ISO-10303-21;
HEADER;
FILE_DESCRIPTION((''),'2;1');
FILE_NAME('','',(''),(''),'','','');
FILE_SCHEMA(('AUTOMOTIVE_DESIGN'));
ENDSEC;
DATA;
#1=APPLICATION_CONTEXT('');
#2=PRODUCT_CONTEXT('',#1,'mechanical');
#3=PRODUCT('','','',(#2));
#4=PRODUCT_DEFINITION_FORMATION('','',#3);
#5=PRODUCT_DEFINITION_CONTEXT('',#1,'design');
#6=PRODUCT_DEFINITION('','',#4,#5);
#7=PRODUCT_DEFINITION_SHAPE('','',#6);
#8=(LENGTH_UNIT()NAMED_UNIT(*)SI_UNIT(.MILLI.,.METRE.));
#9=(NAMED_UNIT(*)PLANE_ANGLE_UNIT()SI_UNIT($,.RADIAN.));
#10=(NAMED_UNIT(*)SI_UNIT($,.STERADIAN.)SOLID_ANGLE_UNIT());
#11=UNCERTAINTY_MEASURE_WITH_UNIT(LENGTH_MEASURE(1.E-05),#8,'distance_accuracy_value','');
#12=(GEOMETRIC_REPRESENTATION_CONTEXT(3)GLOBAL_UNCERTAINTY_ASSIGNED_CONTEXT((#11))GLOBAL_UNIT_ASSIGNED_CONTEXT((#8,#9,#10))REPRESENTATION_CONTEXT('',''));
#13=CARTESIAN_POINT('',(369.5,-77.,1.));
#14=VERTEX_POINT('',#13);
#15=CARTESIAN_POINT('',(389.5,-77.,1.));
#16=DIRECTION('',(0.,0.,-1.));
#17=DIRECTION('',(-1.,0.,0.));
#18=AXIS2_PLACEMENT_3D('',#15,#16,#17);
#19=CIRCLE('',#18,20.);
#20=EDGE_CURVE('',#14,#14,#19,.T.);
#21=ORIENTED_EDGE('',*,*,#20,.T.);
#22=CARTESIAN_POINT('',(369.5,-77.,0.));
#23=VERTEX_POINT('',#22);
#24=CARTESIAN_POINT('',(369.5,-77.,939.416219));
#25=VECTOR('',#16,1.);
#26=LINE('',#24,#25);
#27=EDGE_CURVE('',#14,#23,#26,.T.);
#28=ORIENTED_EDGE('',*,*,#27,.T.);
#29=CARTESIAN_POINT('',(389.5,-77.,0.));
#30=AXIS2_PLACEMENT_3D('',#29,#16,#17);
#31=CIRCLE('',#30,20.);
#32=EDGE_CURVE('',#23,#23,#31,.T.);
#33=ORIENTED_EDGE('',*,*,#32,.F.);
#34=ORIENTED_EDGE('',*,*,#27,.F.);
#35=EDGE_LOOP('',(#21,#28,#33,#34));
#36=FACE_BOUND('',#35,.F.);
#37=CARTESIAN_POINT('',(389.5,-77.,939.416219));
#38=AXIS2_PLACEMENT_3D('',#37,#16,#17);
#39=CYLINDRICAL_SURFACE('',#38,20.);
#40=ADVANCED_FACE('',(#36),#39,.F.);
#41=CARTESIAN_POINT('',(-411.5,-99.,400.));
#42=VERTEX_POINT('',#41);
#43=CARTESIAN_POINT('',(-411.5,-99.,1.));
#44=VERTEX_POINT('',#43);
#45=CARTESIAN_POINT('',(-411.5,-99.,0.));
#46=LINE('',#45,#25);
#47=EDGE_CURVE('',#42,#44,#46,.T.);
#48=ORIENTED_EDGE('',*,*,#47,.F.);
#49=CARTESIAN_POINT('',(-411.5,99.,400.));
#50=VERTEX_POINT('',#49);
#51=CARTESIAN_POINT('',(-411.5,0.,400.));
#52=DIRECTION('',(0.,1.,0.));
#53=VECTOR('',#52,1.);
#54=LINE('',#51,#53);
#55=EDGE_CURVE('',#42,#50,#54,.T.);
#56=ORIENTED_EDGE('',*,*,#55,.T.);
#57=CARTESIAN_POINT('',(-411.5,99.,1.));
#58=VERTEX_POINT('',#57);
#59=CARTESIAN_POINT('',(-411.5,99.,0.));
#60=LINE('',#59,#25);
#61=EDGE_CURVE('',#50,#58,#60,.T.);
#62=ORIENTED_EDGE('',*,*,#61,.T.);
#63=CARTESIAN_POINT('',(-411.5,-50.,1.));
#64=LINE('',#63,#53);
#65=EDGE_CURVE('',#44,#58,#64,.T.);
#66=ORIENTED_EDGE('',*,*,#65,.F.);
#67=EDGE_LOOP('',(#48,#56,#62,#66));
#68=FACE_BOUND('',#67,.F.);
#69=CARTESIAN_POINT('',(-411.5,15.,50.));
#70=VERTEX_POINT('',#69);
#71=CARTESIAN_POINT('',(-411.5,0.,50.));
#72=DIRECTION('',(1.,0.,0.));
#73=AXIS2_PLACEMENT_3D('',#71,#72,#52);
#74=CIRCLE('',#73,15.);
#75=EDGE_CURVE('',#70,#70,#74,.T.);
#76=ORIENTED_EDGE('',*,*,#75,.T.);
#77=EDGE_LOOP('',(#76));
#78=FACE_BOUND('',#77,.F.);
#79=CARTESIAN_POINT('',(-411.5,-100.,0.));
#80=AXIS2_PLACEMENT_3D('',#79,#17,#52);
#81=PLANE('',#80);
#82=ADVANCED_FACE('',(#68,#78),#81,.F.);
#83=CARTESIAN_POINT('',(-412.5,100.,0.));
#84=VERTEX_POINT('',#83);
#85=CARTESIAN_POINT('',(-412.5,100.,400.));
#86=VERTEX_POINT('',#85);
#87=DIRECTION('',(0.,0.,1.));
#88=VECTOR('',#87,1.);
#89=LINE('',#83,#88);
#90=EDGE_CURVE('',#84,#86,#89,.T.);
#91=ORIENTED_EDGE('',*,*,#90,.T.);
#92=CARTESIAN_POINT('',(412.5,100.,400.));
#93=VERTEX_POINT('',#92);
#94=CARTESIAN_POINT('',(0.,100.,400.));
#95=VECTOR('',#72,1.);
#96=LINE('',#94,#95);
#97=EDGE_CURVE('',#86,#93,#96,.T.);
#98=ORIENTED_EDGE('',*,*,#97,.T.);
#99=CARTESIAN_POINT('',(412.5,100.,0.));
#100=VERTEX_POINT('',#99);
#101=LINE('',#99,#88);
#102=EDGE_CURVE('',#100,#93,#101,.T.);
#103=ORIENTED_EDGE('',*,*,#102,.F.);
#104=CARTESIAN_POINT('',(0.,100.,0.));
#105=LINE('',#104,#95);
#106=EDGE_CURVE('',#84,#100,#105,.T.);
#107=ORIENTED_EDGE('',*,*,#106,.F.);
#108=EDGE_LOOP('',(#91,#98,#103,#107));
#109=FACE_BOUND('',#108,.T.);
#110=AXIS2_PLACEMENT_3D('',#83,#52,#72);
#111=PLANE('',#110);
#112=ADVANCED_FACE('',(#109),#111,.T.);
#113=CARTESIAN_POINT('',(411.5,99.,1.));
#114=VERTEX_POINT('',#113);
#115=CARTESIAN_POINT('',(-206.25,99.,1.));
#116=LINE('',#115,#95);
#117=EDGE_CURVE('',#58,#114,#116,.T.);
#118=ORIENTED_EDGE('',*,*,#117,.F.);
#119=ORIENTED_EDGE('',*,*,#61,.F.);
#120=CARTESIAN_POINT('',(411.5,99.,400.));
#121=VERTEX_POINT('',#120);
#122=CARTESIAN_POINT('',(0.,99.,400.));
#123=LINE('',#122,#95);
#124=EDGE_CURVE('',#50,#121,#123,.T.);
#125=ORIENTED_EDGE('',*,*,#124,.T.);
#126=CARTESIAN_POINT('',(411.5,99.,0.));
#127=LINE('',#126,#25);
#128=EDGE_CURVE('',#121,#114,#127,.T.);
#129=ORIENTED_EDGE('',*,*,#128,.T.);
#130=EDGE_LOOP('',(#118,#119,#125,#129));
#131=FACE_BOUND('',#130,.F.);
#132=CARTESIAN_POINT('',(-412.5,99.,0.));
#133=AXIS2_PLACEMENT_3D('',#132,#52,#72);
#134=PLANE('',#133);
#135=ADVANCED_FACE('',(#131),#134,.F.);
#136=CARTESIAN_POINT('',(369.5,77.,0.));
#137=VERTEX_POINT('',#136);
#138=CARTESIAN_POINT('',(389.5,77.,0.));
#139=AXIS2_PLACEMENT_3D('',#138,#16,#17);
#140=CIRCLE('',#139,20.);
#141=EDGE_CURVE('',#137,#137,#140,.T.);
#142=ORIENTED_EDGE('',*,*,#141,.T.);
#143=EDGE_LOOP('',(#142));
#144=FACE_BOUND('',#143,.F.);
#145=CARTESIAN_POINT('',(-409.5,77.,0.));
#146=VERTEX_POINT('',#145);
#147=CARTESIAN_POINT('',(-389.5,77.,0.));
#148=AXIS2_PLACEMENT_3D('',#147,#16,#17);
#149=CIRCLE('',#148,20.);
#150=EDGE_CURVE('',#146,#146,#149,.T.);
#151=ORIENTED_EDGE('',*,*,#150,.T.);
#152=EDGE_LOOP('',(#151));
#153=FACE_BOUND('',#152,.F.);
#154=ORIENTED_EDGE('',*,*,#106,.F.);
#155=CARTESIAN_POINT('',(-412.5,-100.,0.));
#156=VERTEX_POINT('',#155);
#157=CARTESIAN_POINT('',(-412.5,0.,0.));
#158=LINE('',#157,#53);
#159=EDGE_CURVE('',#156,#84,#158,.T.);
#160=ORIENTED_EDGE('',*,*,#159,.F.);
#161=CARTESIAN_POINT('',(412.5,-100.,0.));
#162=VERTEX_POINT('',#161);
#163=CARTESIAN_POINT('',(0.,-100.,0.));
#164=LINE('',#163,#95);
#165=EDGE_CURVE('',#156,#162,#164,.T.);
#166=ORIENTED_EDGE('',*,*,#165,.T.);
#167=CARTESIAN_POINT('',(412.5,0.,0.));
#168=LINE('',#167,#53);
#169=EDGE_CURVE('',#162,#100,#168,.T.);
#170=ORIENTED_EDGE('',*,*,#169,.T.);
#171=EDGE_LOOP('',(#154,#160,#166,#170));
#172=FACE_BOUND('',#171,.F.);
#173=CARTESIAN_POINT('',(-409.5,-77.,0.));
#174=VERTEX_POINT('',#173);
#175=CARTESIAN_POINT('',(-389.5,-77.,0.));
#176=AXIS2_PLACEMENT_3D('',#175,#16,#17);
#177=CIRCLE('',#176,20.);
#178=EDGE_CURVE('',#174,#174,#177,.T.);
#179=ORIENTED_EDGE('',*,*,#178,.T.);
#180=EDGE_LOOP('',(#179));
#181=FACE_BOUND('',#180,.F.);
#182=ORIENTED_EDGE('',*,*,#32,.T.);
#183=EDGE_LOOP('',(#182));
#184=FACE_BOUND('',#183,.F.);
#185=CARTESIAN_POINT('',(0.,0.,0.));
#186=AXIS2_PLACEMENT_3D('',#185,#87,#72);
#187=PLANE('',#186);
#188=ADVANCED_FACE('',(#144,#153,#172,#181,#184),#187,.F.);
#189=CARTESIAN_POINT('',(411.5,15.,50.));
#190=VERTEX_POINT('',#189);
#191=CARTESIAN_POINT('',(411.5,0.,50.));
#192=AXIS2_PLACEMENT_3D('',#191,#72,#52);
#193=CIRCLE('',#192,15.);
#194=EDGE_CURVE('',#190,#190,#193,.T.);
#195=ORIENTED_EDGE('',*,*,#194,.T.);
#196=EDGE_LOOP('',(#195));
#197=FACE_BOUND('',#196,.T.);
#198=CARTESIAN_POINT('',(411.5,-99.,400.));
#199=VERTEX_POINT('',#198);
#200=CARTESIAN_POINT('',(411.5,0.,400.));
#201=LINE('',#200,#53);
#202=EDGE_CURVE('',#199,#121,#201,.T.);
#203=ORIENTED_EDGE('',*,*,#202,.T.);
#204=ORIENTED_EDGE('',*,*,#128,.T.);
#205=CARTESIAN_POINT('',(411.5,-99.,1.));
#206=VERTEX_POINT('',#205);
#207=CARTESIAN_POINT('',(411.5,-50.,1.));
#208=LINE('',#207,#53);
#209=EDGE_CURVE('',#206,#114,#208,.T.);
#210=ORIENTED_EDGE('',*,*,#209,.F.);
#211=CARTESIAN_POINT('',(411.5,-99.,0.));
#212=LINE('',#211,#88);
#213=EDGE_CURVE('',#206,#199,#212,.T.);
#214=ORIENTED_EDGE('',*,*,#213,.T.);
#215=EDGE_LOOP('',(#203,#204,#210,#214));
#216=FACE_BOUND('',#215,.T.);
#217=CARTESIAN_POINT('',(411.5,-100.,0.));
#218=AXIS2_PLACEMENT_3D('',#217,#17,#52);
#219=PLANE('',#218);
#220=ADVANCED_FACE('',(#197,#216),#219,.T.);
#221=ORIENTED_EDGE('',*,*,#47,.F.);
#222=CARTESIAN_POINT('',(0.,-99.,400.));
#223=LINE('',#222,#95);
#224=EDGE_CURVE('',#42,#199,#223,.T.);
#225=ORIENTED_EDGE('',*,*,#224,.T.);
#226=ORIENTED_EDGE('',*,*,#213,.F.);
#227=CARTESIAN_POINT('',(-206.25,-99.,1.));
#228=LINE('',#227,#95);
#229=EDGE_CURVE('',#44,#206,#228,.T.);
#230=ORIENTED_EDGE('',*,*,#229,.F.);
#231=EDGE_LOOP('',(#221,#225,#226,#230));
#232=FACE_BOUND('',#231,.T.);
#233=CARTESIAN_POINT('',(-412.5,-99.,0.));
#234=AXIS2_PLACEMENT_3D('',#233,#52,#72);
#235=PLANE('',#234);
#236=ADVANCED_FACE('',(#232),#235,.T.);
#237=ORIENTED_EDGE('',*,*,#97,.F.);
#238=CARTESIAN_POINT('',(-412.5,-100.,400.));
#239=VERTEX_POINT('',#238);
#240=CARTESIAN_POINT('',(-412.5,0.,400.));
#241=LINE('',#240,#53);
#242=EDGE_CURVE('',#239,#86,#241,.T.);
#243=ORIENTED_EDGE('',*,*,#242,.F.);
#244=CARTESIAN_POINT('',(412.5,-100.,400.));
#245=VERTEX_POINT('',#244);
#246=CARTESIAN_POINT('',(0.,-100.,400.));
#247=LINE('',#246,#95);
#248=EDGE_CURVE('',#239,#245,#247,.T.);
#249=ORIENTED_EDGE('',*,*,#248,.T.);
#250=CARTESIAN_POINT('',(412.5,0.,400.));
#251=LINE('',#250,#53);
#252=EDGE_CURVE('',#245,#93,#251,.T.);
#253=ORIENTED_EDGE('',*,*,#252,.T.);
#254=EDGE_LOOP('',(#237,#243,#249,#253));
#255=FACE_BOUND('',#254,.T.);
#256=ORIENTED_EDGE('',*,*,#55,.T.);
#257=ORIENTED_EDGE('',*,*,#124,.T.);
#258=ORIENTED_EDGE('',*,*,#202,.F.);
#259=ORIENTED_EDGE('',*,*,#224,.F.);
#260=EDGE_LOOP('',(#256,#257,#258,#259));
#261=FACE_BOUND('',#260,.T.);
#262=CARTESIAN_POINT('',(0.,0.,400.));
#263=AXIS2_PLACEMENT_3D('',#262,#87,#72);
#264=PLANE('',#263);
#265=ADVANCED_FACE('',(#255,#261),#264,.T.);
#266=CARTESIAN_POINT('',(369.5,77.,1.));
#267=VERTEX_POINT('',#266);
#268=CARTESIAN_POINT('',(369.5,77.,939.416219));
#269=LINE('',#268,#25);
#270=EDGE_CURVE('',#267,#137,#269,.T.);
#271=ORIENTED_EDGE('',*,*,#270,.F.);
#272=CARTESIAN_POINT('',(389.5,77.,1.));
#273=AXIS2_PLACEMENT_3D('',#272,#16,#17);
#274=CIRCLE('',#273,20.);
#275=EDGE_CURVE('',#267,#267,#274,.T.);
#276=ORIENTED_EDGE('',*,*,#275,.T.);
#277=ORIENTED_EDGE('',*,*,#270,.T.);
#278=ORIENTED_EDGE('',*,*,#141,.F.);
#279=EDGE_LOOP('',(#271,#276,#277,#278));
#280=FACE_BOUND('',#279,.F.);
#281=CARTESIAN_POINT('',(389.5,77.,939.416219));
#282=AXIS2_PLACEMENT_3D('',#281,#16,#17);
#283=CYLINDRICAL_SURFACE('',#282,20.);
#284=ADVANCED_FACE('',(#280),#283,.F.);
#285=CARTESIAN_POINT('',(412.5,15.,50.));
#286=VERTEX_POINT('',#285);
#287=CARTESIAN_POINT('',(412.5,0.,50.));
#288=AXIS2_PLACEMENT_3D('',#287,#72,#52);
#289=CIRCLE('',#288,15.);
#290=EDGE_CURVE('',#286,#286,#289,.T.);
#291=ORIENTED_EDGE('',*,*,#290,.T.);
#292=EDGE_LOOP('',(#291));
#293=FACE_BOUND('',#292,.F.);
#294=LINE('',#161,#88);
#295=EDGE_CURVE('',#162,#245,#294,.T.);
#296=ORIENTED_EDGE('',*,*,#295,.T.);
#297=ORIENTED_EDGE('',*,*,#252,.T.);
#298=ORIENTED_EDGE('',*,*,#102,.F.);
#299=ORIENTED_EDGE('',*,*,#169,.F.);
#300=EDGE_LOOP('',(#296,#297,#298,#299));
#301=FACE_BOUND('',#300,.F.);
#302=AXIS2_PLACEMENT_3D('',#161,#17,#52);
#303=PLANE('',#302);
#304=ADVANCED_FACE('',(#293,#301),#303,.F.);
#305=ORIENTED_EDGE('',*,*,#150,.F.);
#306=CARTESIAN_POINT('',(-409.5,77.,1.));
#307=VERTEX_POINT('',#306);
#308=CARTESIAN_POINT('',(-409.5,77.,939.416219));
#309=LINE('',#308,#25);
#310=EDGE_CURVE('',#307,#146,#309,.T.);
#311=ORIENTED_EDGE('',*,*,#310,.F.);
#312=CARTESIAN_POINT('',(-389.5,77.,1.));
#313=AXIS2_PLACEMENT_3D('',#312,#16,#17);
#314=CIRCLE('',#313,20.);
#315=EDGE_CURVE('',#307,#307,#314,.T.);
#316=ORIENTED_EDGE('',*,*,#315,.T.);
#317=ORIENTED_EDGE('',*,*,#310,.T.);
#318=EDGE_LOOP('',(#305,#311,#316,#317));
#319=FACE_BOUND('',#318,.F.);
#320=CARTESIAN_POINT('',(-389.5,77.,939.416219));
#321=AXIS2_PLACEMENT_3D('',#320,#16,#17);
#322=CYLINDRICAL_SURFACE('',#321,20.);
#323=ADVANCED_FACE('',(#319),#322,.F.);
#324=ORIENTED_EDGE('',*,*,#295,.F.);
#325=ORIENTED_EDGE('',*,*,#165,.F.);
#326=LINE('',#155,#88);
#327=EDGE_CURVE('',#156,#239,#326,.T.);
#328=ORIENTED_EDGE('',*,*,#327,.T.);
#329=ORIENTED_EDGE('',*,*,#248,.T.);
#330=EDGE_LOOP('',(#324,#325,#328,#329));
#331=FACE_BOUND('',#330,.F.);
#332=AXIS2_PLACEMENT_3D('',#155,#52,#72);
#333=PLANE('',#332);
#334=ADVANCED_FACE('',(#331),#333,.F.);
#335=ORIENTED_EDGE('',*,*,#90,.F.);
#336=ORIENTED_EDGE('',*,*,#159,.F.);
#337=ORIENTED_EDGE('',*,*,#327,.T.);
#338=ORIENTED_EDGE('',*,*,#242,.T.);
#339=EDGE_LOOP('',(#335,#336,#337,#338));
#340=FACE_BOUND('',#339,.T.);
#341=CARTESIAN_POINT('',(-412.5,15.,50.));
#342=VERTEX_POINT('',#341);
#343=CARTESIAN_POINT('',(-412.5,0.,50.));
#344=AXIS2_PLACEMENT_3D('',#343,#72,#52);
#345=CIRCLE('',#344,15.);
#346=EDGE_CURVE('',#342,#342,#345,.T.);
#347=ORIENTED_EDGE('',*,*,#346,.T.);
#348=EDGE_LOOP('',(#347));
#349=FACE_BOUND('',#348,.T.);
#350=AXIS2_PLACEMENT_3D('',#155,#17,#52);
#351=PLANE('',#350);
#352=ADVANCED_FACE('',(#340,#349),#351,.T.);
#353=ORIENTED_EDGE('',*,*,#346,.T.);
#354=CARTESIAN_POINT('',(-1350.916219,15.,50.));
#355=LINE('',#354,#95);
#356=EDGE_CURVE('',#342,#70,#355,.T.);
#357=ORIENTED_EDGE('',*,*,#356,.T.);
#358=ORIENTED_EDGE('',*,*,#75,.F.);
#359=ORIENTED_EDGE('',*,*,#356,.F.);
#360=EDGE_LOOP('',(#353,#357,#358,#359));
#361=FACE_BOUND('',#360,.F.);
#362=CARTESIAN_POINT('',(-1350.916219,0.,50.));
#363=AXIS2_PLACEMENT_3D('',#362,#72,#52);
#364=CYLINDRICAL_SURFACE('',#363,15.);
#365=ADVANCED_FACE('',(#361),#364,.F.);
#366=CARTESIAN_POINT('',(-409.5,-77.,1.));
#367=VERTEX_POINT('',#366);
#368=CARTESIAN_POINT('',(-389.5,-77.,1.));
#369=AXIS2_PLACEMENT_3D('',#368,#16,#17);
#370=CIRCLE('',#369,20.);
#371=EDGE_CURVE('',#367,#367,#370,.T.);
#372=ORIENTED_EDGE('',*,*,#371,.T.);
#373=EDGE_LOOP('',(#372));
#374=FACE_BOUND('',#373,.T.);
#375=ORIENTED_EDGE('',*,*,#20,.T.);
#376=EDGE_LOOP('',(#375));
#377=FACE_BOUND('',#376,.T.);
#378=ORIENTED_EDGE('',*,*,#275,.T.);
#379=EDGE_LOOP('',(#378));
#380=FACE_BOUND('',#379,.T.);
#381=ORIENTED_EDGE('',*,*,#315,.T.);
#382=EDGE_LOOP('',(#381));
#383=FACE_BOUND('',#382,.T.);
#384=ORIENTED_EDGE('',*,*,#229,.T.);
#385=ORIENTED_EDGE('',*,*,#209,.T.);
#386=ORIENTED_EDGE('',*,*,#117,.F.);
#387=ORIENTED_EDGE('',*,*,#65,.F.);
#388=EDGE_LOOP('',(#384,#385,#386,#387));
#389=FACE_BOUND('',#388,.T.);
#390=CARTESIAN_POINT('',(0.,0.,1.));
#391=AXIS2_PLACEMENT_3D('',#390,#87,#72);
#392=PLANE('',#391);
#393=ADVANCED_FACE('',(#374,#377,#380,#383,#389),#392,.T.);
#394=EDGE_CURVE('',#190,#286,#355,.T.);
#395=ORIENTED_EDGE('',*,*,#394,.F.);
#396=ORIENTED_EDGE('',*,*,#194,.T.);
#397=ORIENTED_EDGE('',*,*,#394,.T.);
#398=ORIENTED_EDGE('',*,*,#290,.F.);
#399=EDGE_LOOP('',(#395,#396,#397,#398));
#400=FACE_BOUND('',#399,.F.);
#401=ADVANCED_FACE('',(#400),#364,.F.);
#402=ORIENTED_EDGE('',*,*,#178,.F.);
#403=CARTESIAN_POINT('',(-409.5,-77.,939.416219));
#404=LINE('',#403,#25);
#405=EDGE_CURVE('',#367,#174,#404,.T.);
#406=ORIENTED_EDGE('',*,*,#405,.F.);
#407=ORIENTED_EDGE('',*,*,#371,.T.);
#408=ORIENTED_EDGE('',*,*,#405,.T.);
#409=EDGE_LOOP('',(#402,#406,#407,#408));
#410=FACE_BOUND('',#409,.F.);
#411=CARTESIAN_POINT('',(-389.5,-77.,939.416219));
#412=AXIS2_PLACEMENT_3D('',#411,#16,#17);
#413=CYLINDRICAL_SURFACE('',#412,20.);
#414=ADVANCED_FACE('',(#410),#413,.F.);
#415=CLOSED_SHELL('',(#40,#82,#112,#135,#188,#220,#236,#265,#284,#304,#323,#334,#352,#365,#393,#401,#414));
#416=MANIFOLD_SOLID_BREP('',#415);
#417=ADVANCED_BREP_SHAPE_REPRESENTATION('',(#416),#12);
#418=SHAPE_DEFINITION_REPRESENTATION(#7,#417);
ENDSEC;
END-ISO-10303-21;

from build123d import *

# Parameters (mm, degrees)
F0_W     = 825
F0_H     = 200
F1_DEPTH = 400
F2_T     = -1
F5_D     = 40
F7_D     = 30


# Not quite as in the source:
# - the program builds the solid bodies; features that only make, move or delete a surface that nothing else refers to are left out


with BuildPart() as f1:
    # F0 (on Top) → F1 (new body)
    with BuildSketch(Plane.XY):
        Rectangle(F0_W, F0_H)
    extrude(amount=F1_DEPTH)

    # F2
    f2_openings = [f1.faces().sort_by_distance(p)[0] for p in [
        (0, 0, 400),
    ]]
    offset(amount=F2_T, openings=f2_openings)

    # F5 (through all)
    with Locations(Plane.XY.offset(1)):
        with Locations((389.5, 77), (389.5, -77), (-389.5, 77), (-389.5, -77)):
            Hole(F5_D / 2)

    # F7 (through all)
    with Locations(Plane(origin=(-412.5, 0, 0), x_dir=(0, -1, 0), z_dir=(-1, 0, 0))):
        with Locations((0, 50)):
            Hole(F7_D / 2)


solid = f1.part
